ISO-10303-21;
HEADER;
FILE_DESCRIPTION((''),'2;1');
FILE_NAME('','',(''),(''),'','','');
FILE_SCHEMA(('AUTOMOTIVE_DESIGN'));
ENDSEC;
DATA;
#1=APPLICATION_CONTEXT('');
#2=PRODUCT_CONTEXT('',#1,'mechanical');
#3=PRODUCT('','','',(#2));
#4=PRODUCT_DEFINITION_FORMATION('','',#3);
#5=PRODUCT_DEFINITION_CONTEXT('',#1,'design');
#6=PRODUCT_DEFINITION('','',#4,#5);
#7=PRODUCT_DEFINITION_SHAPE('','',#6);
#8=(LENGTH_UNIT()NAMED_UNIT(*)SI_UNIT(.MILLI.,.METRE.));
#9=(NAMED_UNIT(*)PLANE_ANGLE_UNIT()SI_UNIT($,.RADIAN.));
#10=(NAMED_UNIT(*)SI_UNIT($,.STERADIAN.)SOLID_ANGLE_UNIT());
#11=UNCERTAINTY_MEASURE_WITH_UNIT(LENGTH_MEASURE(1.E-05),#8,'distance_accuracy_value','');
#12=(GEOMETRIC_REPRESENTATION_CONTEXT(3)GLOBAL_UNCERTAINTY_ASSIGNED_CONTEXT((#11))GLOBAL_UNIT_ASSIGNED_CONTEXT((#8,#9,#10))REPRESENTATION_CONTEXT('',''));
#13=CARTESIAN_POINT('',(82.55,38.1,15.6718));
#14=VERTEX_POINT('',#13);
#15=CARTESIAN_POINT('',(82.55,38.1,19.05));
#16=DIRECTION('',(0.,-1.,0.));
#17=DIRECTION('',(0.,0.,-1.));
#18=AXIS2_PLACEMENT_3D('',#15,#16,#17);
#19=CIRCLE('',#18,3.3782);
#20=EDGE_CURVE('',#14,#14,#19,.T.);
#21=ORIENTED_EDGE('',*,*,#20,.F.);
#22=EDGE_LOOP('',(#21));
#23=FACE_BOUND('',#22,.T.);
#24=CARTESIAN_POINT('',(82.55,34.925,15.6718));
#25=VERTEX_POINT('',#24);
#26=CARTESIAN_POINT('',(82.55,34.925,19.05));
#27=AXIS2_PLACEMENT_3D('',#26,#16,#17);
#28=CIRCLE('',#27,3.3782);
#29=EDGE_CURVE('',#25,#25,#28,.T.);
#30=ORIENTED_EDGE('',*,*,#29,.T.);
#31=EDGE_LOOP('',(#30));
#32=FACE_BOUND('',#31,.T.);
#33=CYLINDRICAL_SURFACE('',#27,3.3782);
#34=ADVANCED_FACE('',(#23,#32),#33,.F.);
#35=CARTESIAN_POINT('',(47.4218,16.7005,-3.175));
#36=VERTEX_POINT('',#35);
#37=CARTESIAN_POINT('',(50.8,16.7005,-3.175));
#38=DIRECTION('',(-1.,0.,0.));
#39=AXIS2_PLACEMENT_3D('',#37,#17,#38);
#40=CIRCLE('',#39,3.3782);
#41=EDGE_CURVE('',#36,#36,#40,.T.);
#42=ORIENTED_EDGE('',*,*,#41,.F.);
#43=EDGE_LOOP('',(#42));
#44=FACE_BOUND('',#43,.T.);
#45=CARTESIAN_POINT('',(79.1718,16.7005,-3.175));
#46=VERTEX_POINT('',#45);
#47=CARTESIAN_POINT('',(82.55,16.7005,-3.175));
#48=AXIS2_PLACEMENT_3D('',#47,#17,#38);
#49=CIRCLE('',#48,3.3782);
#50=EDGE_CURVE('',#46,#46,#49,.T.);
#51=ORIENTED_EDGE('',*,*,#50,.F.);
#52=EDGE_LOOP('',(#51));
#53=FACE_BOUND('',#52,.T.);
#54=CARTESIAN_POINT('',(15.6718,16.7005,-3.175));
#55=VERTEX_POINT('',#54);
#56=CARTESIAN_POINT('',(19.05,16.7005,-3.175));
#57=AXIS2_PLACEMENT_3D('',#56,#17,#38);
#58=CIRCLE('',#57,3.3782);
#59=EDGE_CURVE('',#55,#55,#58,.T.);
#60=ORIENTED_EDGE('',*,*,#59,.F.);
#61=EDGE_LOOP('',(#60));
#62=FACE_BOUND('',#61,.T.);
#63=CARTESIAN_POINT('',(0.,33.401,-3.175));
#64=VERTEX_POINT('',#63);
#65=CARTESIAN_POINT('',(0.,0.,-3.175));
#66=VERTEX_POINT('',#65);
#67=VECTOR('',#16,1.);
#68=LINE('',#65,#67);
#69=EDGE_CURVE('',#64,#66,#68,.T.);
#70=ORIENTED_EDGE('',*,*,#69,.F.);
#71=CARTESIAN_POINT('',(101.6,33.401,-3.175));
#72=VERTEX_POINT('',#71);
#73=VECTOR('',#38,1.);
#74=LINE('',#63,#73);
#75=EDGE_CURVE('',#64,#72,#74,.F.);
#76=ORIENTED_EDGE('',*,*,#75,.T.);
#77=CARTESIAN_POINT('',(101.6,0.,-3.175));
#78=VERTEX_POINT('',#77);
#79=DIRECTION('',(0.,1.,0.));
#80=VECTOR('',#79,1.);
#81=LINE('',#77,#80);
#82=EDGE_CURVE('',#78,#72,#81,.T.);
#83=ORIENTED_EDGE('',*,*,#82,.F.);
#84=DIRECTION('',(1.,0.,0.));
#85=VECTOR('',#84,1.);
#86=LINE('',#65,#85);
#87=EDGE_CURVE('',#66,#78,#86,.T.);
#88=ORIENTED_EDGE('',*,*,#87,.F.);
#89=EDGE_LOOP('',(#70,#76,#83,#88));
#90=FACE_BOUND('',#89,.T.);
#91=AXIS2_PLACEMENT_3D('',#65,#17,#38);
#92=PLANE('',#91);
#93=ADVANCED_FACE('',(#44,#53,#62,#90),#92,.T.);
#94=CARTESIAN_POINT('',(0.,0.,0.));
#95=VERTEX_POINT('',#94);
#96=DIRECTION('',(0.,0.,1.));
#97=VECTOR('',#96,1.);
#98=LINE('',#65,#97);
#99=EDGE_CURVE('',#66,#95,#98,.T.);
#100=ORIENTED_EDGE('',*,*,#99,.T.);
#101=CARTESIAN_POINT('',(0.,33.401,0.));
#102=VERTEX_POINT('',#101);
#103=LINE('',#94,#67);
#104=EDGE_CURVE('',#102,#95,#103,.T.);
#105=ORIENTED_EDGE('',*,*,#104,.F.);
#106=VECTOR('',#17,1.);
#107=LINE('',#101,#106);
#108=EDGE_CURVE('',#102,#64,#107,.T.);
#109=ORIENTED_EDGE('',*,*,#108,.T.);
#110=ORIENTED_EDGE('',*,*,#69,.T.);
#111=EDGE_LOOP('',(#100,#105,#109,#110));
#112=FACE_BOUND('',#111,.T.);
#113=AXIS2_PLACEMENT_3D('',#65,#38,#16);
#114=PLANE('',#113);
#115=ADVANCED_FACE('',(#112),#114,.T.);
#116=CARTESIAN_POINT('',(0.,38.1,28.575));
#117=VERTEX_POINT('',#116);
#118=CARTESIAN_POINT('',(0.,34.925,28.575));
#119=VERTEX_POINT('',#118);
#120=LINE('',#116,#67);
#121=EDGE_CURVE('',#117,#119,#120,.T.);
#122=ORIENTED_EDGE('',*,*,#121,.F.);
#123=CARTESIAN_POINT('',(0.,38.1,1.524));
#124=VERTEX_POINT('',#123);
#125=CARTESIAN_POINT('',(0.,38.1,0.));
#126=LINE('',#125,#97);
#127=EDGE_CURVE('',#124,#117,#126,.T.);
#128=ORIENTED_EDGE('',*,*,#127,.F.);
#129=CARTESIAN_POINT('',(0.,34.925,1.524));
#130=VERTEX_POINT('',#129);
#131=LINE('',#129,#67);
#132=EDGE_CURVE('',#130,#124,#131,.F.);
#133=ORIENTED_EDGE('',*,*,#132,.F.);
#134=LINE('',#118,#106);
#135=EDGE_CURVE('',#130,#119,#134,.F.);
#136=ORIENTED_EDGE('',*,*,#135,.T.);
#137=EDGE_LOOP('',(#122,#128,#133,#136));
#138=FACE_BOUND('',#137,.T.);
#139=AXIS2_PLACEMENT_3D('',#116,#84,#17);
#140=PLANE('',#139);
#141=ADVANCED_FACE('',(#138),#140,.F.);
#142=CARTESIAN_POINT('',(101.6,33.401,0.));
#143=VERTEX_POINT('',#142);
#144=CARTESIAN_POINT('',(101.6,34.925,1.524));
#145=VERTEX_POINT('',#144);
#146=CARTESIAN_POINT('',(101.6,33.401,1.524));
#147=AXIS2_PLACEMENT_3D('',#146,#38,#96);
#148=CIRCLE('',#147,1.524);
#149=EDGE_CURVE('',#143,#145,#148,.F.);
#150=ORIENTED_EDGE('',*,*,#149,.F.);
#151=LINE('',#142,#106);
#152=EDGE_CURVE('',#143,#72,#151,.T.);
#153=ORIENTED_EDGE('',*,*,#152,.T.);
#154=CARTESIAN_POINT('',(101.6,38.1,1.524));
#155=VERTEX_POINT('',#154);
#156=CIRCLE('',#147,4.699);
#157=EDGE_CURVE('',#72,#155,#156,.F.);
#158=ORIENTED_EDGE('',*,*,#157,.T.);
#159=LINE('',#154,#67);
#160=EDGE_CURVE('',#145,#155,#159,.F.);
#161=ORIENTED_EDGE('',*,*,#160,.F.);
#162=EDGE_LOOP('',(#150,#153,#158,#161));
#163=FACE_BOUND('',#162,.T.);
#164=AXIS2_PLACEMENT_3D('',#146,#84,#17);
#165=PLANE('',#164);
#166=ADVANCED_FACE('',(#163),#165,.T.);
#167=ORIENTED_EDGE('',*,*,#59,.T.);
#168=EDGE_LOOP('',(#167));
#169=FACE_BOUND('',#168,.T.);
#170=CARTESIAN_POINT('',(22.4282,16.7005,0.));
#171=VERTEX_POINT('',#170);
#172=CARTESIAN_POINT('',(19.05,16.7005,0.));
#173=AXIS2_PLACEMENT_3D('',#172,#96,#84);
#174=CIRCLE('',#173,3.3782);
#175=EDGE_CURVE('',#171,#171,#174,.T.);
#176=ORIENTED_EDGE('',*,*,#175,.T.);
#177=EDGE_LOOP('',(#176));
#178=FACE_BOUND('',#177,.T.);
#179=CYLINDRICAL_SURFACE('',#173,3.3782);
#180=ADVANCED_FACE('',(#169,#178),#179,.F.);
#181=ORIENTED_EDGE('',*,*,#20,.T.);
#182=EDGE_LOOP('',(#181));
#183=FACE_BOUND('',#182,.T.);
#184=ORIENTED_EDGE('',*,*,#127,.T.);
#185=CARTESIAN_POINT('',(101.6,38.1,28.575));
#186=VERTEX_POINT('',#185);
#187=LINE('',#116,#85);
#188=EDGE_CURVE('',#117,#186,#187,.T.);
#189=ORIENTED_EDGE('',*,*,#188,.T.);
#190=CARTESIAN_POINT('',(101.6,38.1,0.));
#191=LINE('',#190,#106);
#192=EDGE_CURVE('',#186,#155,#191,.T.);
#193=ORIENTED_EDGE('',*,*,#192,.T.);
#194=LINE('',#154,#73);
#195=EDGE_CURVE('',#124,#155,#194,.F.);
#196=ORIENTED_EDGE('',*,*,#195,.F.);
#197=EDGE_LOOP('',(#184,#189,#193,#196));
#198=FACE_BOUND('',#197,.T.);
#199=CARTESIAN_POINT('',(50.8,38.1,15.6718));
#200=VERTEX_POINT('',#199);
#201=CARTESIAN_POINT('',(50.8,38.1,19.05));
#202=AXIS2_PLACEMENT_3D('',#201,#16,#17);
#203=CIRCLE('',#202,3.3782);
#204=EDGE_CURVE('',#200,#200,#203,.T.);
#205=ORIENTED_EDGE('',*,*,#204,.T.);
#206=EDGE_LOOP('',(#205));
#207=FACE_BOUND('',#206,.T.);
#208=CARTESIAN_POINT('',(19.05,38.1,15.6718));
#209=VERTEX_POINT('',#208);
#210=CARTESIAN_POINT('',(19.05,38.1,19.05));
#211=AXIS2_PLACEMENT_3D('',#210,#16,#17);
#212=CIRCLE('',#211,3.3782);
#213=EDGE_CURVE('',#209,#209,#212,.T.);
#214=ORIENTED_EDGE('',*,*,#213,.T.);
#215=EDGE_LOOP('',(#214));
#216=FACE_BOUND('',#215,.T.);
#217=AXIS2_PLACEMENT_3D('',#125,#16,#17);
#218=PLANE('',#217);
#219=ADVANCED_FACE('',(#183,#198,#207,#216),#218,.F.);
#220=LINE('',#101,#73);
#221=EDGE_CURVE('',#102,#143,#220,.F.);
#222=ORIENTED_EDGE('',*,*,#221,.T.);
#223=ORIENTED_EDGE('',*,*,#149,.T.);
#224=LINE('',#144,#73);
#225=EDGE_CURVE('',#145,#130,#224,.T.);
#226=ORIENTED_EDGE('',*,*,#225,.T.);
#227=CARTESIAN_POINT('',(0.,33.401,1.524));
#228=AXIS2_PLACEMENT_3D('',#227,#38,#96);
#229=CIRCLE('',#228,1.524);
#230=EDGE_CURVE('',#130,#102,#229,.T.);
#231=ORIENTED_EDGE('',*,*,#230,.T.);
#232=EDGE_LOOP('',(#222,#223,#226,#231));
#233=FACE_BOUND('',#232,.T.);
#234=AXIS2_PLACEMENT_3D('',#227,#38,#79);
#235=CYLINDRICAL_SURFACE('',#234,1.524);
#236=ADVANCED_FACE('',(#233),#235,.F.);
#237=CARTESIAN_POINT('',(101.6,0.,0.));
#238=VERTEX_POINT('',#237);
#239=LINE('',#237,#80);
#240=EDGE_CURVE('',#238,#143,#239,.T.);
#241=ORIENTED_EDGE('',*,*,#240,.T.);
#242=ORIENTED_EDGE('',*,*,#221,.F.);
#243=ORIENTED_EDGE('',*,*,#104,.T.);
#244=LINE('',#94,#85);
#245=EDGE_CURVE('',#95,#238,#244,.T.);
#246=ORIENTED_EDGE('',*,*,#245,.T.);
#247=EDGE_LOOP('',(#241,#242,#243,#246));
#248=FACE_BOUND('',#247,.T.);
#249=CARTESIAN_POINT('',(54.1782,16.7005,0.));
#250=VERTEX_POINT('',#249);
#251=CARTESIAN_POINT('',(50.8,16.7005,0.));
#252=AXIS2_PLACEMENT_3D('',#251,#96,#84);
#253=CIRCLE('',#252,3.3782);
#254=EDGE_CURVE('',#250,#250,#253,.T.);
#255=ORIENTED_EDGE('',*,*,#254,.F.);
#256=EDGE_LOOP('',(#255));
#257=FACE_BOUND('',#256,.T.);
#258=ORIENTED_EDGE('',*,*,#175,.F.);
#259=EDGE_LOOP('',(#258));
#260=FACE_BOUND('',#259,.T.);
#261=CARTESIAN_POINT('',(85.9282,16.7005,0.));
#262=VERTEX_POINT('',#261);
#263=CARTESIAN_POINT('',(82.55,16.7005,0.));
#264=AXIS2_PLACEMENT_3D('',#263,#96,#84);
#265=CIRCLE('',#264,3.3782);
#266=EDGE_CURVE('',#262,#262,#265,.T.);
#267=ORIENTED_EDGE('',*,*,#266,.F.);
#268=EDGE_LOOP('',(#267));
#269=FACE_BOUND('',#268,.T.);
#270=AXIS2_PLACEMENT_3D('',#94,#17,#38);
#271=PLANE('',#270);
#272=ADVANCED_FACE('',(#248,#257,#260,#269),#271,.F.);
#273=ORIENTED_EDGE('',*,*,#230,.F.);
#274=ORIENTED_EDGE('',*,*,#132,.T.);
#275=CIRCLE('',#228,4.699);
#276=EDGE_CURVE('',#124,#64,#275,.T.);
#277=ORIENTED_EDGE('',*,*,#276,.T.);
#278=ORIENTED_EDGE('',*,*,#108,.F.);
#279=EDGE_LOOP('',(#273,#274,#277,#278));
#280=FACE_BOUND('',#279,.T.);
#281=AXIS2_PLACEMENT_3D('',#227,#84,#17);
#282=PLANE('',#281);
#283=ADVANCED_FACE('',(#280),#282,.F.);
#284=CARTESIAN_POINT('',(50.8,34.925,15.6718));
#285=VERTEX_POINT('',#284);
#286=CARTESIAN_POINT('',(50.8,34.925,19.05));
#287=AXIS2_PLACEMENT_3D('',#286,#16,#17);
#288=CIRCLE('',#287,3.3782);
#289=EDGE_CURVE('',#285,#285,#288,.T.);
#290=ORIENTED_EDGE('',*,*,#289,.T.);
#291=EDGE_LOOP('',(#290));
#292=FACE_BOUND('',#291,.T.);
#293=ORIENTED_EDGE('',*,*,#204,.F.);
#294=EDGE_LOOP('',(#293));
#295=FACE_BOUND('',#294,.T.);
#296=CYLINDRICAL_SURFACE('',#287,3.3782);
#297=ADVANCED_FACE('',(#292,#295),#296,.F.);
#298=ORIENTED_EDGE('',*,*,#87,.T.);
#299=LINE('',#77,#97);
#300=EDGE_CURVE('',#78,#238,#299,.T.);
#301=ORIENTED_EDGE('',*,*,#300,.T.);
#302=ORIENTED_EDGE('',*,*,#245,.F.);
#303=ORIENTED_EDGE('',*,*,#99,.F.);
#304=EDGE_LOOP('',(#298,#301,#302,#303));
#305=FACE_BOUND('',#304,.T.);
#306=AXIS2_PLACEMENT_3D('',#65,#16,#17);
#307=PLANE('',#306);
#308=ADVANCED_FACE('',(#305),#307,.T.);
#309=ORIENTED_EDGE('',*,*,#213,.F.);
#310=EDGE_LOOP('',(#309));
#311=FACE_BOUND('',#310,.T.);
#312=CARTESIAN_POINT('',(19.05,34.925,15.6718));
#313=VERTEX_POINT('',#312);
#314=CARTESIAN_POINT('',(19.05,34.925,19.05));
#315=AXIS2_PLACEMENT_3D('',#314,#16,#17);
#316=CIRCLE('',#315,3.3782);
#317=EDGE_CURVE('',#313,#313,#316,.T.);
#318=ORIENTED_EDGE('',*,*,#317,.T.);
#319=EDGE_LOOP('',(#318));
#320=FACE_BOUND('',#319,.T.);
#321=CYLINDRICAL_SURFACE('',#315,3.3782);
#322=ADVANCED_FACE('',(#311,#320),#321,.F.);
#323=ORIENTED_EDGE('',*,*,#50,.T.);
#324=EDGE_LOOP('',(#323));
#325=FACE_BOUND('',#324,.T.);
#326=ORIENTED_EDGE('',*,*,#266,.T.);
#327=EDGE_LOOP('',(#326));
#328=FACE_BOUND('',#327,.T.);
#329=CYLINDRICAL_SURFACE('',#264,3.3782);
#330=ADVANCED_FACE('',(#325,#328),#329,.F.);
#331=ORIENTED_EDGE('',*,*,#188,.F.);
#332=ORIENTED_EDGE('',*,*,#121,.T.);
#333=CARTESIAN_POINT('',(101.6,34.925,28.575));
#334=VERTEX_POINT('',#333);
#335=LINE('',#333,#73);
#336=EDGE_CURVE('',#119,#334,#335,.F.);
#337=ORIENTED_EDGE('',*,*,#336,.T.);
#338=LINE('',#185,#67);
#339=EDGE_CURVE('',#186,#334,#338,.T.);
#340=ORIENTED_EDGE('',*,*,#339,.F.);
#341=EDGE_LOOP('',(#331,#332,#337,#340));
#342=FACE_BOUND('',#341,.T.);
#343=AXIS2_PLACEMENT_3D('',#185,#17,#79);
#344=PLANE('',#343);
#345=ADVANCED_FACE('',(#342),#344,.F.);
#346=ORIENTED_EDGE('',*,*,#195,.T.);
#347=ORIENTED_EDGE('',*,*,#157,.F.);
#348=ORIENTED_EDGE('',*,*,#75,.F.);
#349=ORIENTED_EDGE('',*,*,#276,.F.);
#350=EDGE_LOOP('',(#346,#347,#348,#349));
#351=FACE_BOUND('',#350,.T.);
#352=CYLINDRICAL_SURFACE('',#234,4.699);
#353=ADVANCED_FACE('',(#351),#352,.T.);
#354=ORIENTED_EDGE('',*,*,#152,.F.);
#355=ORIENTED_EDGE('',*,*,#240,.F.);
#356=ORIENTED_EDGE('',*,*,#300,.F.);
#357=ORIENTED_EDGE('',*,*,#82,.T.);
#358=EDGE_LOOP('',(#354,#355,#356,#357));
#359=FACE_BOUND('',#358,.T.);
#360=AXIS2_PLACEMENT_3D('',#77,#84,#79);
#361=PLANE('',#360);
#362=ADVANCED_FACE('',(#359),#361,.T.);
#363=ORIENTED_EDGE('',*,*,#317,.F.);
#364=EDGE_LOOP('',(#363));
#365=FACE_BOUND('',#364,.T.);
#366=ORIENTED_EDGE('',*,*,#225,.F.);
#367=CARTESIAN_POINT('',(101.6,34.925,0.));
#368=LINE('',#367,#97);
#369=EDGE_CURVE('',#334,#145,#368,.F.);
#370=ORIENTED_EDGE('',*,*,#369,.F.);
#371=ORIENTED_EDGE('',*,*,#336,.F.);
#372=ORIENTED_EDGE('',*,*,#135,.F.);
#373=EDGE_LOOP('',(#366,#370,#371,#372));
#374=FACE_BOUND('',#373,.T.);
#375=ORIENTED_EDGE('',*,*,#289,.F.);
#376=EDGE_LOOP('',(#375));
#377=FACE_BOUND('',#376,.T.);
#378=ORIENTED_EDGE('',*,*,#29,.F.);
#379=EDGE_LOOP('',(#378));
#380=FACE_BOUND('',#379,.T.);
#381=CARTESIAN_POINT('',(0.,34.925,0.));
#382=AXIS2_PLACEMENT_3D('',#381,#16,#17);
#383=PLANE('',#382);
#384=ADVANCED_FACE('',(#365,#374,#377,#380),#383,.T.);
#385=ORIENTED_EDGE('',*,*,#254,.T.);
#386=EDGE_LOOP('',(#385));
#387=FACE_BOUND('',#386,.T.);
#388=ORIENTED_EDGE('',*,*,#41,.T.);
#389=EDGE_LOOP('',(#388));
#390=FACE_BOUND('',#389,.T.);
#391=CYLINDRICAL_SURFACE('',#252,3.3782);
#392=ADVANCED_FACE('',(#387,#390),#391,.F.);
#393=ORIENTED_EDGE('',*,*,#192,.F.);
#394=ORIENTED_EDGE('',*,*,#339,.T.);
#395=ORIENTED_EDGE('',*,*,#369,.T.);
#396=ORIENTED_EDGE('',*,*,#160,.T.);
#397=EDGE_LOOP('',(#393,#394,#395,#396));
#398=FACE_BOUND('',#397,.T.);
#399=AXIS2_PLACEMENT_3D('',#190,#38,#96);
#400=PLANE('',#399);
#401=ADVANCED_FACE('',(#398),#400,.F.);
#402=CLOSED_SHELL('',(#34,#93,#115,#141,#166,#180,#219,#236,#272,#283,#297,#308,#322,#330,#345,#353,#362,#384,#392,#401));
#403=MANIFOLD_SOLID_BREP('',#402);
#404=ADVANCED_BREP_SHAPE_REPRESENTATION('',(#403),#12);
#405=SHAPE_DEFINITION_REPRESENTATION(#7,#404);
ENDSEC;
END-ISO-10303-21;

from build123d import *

# Parameters (mm, degrees)
SKETCH1_W                         = 101.6
SKETCH1_H                         = 38.1
BASE_FLANGE1_DEPTH                = 3.175
EDGE_FLANGE1_STRIP_W              = 15.748
EDGE_FLANGE1_STRIP_H              = 3.175
EDGE_FLANGE1_STRIP_CUT_DEPTH      = 101.6
EDGE_FLANGE1_DEPTH                = 101.6
F_1_4_CLEARANCE_HOLE1_D           = 6.7564
F_1_4_CLEARANCE_HOLE1_ON_FACE_2_D = 6.7564


# Sheet-metal steps are written as plain solids
with BuildPart() as part:
    # Sketch1 → Base-Flange1 (new body)
    with BuildSketch(Plane.XY):
        with Locations((50.8, 19.05)):
            Rectangle(SKETCH1_W, SKETCH1_H)
    extrude(amount=-BASE_FLANGE1_DEPTH)

    # Edge-Flange1 strip (across the edge) → Edge-Flange1 strip cut (cut)
    with BuildSketch(Plane(origin=(101.6, 38.1, 0), x_dir=(0, -1, 0), z_dir=(-1, 0, 0))):
        with Locations((-3.175, -1.5875)):
            Rectangle(EDGE_FLANGE1_STRIP_W, EDGE_FLANGE1_STRIP_H)
    extrude(amount=EDGE_FLANGE1_STRIP_CUT_DEPTH, mode=Mode.SUBTRACT)

    # Edge-Flange1 section (across the edge) → Edge-Flange1 (add)
    with BuildSketch(Plane(origin=(101.6, 38.1, 0), x_dir=(0, -1, 0), z_dir=(-1, 0, 0))):
        with BuildLine():
            Line((0, 1.524), (0, 28.575))
            Line((0, 28.575), (3.175, 28.575))
            Line((3.175, 28.575), (3.175, 1.524))
            ThreePointArc((3.175, 1.524), (3.621369265, 0.446369265), (4.699, 0))
            Line((4.699, 0), (4.699, -3.175))
            ThreePointArc((4.699, -3.175), (1.376305235, -1.798694765), (0, 1.524))
        make_face()
    extrude(amount=EDGE_FLANGE1_DEPTH)

    # 1/4 Clearance Hole1 (through all)
    with Locations(Plane(origin=(82.55, 16.7005, 0), x_dir=(1, 0, 0), z_dir=(0, 0, 1))):
        with Locations((0, 0), (-31.75, 0), (-63.5, 0)):
            Hole(F_1_4_CLEARANCE_HOLE1_D / 2)

    # 1/4 Clearance Hole1 on face 2 (through all)
    with Locations(Plane(origin=(82.55, 34.925, 19.05), x_dir=(0, 0, -1), z_dir=(0, -1, 0))):
        with Locations((0, 0), (0, -31.75), (0, -63.5)):
            Hole(F_1_4_CLEARANCE_HOLE1_ON_FACE_2_D / 2)


solid = part.part
